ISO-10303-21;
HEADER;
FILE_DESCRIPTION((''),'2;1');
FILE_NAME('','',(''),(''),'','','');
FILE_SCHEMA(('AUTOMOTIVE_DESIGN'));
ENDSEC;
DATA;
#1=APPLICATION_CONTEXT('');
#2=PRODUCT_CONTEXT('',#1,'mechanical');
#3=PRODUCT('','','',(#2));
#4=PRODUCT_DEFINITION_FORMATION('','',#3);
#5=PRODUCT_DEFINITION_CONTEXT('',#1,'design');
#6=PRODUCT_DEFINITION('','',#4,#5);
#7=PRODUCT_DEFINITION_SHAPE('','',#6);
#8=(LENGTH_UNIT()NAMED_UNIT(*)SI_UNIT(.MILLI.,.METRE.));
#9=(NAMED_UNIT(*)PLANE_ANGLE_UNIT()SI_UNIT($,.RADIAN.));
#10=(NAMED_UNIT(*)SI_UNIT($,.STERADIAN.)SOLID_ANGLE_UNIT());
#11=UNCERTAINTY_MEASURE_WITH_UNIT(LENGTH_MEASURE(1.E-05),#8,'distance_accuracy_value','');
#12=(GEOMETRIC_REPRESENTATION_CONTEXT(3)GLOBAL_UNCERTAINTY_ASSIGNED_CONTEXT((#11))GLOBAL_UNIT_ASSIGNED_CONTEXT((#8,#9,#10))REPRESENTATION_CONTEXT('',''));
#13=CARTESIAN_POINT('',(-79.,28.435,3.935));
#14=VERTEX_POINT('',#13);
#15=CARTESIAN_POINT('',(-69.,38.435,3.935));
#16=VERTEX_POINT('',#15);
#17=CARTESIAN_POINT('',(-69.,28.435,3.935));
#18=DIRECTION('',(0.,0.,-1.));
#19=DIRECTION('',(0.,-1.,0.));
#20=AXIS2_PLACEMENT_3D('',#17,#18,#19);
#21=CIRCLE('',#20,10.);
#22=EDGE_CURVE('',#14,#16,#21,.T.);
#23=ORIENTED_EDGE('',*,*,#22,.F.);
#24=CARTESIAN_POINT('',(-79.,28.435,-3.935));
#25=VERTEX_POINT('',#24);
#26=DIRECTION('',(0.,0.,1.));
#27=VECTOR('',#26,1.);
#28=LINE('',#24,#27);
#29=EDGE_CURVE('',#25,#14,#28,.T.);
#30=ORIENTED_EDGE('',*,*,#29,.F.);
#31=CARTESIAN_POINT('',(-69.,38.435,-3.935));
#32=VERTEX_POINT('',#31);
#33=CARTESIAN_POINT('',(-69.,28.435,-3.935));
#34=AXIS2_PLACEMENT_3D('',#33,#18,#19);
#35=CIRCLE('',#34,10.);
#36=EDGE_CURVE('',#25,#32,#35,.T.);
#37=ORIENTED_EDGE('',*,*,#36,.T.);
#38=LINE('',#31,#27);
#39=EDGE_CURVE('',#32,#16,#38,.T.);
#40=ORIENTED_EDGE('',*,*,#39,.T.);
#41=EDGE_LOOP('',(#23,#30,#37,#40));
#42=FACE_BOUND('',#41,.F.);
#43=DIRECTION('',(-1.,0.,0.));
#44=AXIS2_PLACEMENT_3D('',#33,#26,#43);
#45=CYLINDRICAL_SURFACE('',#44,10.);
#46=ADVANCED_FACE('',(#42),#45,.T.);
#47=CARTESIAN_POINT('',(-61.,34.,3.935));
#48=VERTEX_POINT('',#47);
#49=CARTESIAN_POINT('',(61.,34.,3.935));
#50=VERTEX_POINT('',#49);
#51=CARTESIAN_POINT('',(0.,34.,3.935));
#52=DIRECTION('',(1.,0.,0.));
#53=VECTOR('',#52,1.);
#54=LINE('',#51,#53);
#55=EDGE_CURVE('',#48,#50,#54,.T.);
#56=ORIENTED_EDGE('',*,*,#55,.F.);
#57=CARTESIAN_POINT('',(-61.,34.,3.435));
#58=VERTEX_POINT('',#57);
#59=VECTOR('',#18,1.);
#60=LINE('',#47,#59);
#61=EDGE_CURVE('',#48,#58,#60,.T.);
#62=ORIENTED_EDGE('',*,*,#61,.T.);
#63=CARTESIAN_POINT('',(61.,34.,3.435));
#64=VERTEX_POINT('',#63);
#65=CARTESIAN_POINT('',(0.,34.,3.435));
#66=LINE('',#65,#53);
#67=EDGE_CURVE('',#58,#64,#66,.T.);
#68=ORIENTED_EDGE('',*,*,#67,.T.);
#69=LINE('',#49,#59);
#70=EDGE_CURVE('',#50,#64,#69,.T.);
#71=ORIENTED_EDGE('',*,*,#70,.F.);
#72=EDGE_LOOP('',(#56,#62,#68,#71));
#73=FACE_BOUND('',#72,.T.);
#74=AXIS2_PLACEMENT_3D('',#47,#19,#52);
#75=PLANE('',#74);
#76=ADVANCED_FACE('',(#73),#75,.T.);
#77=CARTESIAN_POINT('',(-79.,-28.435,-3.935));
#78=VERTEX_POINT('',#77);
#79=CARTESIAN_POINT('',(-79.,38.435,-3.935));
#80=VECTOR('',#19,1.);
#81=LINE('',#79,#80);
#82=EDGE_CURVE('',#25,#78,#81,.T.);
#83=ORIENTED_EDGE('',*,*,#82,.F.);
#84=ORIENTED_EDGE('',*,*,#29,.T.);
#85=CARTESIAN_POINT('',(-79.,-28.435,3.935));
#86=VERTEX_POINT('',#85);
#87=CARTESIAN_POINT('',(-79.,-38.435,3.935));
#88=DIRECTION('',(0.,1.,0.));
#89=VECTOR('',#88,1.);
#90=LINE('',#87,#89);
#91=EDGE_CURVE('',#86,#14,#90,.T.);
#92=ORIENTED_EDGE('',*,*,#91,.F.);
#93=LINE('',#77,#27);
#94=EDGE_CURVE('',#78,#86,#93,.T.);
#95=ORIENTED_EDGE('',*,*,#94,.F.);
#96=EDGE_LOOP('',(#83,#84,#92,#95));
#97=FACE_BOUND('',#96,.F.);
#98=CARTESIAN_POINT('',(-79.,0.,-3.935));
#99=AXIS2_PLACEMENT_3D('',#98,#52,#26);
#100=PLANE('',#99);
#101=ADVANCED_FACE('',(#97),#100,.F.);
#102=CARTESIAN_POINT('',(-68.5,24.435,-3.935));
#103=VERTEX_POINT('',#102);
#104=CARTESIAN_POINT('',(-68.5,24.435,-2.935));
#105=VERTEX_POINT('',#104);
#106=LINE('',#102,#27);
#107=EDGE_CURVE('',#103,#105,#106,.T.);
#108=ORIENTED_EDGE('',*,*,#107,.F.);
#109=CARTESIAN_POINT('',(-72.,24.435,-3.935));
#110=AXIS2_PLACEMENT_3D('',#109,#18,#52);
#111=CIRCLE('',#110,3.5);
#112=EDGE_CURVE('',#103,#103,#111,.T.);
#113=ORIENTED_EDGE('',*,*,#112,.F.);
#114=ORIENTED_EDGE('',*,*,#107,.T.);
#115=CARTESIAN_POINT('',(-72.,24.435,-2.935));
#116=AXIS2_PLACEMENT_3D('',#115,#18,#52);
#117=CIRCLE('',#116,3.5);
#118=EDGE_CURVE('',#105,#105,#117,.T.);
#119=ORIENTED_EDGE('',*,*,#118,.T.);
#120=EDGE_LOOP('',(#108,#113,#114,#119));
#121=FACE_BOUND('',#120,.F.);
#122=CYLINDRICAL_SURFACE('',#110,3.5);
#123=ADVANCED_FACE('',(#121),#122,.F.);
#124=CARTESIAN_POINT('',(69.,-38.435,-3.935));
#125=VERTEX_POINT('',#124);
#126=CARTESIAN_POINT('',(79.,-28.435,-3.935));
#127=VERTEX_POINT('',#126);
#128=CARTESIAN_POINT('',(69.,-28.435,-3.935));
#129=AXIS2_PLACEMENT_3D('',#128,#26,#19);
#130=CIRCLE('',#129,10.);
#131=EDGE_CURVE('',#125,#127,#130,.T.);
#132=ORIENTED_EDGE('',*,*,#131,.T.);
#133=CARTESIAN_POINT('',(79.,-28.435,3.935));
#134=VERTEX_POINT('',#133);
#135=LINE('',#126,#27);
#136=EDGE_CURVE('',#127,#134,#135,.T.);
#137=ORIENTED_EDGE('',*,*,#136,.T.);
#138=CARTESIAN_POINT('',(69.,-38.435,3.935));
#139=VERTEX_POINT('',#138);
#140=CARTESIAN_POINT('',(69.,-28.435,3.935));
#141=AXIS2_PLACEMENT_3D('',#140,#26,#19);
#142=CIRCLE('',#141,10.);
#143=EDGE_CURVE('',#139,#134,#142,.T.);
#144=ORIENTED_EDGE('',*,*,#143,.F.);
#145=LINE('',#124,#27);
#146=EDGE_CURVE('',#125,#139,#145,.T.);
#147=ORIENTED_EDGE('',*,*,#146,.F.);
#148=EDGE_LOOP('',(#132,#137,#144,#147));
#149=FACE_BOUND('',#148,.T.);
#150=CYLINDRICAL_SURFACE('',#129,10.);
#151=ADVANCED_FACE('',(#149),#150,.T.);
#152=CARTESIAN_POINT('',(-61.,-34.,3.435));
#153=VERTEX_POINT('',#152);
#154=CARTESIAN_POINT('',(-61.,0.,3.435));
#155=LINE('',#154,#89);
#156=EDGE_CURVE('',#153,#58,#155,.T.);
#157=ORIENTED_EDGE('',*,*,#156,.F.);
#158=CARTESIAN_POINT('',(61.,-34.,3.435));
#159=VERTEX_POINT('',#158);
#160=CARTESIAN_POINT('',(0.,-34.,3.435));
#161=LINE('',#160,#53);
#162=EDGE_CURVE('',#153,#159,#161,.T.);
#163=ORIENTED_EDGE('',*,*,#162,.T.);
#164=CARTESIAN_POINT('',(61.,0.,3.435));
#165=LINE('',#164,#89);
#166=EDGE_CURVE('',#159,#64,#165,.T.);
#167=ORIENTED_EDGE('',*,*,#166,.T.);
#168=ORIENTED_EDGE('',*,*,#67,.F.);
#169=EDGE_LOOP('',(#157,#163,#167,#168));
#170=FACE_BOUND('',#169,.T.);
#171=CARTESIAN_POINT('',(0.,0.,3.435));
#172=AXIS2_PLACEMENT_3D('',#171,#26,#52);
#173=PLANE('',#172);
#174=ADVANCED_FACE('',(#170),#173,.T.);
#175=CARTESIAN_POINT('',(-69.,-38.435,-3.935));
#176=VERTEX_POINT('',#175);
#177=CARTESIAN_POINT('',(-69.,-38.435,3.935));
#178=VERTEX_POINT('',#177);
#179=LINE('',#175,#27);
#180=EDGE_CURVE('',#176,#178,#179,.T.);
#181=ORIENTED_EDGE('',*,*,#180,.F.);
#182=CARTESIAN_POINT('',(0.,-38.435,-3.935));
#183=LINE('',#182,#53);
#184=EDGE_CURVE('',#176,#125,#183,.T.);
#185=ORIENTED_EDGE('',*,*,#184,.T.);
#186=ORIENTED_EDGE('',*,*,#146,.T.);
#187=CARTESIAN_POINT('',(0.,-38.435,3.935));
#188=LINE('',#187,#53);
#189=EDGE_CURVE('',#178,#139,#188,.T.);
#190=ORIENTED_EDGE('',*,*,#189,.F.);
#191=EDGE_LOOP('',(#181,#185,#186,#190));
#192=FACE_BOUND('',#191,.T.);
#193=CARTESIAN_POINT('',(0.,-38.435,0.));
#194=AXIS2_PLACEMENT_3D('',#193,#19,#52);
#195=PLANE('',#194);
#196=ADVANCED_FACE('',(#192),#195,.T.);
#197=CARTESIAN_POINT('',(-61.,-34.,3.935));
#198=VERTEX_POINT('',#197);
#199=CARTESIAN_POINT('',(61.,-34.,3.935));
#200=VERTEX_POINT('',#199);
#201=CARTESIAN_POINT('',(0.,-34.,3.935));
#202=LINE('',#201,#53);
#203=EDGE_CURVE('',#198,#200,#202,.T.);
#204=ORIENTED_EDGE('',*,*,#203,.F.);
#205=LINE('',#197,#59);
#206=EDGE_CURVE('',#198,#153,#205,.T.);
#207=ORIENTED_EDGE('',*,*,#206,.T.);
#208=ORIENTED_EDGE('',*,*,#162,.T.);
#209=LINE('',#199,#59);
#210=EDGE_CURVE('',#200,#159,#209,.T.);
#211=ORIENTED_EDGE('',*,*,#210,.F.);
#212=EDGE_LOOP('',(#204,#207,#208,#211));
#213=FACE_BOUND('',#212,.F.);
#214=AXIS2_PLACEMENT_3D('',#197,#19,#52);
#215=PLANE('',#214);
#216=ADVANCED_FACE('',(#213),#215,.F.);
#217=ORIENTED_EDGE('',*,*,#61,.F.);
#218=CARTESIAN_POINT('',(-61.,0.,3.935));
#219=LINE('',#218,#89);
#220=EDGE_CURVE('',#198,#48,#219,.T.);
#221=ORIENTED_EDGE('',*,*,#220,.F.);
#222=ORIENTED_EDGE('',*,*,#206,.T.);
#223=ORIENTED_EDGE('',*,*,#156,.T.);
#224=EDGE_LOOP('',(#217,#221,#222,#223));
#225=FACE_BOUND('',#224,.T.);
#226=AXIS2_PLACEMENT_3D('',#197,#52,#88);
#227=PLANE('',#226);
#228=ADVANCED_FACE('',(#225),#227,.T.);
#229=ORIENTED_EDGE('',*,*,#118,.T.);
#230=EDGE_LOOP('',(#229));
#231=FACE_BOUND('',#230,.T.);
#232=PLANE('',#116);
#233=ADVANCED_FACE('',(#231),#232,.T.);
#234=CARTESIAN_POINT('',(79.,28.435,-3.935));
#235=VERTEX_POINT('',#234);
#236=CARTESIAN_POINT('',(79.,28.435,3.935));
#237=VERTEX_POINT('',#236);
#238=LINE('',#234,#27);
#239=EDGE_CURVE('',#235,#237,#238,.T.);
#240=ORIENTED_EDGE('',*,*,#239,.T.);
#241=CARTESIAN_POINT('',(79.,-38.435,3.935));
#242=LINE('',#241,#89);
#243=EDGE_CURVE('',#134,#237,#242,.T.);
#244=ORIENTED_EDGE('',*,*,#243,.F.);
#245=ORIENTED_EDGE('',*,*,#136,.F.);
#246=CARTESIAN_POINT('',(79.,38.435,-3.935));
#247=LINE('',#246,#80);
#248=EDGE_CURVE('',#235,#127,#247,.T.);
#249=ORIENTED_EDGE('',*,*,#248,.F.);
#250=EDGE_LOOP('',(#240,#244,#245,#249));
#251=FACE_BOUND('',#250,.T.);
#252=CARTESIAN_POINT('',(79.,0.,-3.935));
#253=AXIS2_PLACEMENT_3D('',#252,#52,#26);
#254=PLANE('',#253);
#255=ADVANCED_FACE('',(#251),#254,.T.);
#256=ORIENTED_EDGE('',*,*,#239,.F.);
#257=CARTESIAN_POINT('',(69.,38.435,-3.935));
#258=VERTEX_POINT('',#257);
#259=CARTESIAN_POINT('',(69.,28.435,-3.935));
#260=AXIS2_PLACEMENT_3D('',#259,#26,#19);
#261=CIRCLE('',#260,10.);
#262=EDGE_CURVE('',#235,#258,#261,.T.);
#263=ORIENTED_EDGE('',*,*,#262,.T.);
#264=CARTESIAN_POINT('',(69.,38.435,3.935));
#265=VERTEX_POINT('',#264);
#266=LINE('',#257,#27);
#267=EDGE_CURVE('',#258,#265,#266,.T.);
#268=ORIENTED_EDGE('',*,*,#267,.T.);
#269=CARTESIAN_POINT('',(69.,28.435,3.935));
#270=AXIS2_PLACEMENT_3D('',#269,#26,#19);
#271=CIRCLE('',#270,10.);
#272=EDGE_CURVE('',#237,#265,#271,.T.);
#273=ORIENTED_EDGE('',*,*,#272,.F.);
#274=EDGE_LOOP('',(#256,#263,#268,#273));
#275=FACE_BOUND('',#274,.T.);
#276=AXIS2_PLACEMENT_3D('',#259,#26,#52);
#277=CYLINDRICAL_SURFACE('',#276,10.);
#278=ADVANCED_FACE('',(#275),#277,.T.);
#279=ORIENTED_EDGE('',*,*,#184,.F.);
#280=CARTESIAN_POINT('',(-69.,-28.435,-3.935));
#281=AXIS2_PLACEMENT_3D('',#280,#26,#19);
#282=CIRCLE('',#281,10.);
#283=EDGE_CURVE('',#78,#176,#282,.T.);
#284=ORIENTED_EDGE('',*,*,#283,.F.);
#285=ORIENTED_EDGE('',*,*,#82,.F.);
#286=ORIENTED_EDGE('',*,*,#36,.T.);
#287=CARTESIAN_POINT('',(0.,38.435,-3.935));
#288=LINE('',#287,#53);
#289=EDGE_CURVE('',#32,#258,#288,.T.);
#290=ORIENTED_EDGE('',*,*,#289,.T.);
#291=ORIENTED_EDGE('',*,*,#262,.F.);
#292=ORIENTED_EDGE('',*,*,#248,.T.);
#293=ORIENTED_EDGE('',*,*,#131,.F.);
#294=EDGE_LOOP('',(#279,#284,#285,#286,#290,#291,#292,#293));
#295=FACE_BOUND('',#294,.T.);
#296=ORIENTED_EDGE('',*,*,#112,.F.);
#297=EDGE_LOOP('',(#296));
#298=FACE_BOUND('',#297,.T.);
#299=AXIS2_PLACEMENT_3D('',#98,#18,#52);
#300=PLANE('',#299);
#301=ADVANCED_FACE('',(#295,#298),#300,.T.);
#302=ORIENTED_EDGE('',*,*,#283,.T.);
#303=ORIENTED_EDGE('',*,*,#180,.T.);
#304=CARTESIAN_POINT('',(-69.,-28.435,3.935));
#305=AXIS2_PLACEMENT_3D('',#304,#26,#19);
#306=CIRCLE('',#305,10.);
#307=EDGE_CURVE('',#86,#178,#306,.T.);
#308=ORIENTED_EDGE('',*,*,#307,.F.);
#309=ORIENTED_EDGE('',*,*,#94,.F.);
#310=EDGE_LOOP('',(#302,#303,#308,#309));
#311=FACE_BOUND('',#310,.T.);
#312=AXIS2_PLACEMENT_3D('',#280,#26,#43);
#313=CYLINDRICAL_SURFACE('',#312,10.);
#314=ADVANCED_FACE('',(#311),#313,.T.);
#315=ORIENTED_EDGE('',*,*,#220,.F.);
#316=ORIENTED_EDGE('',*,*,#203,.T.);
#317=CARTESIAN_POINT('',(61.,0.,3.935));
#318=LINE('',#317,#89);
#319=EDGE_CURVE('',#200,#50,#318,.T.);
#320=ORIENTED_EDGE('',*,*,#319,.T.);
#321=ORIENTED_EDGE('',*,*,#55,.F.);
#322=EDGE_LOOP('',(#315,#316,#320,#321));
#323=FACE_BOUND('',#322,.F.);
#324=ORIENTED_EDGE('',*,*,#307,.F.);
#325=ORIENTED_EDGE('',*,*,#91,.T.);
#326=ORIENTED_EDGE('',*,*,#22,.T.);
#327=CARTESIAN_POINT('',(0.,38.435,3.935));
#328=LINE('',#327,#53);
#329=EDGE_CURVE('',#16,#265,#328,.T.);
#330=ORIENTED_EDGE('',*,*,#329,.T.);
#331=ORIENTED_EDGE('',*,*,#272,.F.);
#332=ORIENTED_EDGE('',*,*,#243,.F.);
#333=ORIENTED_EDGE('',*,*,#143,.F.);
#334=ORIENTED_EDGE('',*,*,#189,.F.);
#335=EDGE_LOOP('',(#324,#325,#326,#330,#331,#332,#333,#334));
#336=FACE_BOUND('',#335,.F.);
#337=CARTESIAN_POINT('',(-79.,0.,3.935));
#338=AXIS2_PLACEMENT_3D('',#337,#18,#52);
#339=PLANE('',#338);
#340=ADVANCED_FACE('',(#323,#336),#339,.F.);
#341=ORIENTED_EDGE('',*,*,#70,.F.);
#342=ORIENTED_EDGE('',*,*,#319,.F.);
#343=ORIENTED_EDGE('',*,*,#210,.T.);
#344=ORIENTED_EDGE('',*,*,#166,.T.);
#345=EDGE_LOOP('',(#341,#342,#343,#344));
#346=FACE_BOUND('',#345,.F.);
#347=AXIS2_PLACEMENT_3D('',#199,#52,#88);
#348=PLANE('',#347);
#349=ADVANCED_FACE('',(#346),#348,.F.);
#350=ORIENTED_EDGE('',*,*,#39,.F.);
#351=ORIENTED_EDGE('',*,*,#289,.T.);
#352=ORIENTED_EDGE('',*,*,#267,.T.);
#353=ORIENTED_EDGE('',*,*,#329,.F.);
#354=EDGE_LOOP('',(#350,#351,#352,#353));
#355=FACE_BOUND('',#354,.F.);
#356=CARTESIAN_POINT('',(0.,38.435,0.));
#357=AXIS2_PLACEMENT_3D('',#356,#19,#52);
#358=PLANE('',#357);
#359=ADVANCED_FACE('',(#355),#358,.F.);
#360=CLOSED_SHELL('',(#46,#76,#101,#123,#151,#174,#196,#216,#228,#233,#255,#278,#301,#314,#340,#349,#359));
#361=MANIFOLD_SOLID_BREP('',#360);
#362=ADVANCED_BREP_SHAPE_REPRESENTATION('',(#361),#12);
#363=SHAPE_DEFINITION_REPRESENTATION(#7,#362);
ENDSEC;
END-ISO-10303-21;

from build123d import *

# Parameters (mm, degrees)
F0_W     = 158
F0_H     = 7.87
F1_DEPTH = 38.435
F2_R     = 10
F3_W     = 122
F3_H     = 68
F4_DEPTH = 0.5
F7_R     = 3.5
F8_DEPTH = 1


# Not quite as in the source:
# - the program builds the solid bodies; features that only make, move or delete a surface that nothing else refers to are left out


with BuildPart() as f1:
    # F0 (on Front) → F1 (new body, symmetric)
    with BuildSketch(Plane.XZ):
        Rectangle(F0_W, F0_H)
    extrude(amount=F1_DEPTH, both=True)

    # F2
    f2_edges = [f1.edges().sort_by_distance(p)[0] for p in [
        (-79, 38.435, 0),
        (-79, -38.435, 0),
        (79, -38.435, 0),
        (79, 38.435, 0),
    ]]
    fillet(f2_edges, radius=F2_R)

    # F3 (on face) → F4 (cut)
    with BuildSketch(Plane.XY.offset(3.935)):
        Rectangle(F3_W, F3_H)
    extrude(amount=-F4_DEPTH, mode=Mode.SUBTRACT)

    # F7 (on face) → F8 (cut)
    with BuildSketch(Plane(origin=(0, 0, -3.935), x_dir=(1, 0, 0), z_dir=(0, 0, -1))):
        with Locations((-72, -24.435)):
            Circle(F7_R)
    extrude(amount=-F8_DEPTH, mode=Mode.SUBTRACT)


solid = f1.part
